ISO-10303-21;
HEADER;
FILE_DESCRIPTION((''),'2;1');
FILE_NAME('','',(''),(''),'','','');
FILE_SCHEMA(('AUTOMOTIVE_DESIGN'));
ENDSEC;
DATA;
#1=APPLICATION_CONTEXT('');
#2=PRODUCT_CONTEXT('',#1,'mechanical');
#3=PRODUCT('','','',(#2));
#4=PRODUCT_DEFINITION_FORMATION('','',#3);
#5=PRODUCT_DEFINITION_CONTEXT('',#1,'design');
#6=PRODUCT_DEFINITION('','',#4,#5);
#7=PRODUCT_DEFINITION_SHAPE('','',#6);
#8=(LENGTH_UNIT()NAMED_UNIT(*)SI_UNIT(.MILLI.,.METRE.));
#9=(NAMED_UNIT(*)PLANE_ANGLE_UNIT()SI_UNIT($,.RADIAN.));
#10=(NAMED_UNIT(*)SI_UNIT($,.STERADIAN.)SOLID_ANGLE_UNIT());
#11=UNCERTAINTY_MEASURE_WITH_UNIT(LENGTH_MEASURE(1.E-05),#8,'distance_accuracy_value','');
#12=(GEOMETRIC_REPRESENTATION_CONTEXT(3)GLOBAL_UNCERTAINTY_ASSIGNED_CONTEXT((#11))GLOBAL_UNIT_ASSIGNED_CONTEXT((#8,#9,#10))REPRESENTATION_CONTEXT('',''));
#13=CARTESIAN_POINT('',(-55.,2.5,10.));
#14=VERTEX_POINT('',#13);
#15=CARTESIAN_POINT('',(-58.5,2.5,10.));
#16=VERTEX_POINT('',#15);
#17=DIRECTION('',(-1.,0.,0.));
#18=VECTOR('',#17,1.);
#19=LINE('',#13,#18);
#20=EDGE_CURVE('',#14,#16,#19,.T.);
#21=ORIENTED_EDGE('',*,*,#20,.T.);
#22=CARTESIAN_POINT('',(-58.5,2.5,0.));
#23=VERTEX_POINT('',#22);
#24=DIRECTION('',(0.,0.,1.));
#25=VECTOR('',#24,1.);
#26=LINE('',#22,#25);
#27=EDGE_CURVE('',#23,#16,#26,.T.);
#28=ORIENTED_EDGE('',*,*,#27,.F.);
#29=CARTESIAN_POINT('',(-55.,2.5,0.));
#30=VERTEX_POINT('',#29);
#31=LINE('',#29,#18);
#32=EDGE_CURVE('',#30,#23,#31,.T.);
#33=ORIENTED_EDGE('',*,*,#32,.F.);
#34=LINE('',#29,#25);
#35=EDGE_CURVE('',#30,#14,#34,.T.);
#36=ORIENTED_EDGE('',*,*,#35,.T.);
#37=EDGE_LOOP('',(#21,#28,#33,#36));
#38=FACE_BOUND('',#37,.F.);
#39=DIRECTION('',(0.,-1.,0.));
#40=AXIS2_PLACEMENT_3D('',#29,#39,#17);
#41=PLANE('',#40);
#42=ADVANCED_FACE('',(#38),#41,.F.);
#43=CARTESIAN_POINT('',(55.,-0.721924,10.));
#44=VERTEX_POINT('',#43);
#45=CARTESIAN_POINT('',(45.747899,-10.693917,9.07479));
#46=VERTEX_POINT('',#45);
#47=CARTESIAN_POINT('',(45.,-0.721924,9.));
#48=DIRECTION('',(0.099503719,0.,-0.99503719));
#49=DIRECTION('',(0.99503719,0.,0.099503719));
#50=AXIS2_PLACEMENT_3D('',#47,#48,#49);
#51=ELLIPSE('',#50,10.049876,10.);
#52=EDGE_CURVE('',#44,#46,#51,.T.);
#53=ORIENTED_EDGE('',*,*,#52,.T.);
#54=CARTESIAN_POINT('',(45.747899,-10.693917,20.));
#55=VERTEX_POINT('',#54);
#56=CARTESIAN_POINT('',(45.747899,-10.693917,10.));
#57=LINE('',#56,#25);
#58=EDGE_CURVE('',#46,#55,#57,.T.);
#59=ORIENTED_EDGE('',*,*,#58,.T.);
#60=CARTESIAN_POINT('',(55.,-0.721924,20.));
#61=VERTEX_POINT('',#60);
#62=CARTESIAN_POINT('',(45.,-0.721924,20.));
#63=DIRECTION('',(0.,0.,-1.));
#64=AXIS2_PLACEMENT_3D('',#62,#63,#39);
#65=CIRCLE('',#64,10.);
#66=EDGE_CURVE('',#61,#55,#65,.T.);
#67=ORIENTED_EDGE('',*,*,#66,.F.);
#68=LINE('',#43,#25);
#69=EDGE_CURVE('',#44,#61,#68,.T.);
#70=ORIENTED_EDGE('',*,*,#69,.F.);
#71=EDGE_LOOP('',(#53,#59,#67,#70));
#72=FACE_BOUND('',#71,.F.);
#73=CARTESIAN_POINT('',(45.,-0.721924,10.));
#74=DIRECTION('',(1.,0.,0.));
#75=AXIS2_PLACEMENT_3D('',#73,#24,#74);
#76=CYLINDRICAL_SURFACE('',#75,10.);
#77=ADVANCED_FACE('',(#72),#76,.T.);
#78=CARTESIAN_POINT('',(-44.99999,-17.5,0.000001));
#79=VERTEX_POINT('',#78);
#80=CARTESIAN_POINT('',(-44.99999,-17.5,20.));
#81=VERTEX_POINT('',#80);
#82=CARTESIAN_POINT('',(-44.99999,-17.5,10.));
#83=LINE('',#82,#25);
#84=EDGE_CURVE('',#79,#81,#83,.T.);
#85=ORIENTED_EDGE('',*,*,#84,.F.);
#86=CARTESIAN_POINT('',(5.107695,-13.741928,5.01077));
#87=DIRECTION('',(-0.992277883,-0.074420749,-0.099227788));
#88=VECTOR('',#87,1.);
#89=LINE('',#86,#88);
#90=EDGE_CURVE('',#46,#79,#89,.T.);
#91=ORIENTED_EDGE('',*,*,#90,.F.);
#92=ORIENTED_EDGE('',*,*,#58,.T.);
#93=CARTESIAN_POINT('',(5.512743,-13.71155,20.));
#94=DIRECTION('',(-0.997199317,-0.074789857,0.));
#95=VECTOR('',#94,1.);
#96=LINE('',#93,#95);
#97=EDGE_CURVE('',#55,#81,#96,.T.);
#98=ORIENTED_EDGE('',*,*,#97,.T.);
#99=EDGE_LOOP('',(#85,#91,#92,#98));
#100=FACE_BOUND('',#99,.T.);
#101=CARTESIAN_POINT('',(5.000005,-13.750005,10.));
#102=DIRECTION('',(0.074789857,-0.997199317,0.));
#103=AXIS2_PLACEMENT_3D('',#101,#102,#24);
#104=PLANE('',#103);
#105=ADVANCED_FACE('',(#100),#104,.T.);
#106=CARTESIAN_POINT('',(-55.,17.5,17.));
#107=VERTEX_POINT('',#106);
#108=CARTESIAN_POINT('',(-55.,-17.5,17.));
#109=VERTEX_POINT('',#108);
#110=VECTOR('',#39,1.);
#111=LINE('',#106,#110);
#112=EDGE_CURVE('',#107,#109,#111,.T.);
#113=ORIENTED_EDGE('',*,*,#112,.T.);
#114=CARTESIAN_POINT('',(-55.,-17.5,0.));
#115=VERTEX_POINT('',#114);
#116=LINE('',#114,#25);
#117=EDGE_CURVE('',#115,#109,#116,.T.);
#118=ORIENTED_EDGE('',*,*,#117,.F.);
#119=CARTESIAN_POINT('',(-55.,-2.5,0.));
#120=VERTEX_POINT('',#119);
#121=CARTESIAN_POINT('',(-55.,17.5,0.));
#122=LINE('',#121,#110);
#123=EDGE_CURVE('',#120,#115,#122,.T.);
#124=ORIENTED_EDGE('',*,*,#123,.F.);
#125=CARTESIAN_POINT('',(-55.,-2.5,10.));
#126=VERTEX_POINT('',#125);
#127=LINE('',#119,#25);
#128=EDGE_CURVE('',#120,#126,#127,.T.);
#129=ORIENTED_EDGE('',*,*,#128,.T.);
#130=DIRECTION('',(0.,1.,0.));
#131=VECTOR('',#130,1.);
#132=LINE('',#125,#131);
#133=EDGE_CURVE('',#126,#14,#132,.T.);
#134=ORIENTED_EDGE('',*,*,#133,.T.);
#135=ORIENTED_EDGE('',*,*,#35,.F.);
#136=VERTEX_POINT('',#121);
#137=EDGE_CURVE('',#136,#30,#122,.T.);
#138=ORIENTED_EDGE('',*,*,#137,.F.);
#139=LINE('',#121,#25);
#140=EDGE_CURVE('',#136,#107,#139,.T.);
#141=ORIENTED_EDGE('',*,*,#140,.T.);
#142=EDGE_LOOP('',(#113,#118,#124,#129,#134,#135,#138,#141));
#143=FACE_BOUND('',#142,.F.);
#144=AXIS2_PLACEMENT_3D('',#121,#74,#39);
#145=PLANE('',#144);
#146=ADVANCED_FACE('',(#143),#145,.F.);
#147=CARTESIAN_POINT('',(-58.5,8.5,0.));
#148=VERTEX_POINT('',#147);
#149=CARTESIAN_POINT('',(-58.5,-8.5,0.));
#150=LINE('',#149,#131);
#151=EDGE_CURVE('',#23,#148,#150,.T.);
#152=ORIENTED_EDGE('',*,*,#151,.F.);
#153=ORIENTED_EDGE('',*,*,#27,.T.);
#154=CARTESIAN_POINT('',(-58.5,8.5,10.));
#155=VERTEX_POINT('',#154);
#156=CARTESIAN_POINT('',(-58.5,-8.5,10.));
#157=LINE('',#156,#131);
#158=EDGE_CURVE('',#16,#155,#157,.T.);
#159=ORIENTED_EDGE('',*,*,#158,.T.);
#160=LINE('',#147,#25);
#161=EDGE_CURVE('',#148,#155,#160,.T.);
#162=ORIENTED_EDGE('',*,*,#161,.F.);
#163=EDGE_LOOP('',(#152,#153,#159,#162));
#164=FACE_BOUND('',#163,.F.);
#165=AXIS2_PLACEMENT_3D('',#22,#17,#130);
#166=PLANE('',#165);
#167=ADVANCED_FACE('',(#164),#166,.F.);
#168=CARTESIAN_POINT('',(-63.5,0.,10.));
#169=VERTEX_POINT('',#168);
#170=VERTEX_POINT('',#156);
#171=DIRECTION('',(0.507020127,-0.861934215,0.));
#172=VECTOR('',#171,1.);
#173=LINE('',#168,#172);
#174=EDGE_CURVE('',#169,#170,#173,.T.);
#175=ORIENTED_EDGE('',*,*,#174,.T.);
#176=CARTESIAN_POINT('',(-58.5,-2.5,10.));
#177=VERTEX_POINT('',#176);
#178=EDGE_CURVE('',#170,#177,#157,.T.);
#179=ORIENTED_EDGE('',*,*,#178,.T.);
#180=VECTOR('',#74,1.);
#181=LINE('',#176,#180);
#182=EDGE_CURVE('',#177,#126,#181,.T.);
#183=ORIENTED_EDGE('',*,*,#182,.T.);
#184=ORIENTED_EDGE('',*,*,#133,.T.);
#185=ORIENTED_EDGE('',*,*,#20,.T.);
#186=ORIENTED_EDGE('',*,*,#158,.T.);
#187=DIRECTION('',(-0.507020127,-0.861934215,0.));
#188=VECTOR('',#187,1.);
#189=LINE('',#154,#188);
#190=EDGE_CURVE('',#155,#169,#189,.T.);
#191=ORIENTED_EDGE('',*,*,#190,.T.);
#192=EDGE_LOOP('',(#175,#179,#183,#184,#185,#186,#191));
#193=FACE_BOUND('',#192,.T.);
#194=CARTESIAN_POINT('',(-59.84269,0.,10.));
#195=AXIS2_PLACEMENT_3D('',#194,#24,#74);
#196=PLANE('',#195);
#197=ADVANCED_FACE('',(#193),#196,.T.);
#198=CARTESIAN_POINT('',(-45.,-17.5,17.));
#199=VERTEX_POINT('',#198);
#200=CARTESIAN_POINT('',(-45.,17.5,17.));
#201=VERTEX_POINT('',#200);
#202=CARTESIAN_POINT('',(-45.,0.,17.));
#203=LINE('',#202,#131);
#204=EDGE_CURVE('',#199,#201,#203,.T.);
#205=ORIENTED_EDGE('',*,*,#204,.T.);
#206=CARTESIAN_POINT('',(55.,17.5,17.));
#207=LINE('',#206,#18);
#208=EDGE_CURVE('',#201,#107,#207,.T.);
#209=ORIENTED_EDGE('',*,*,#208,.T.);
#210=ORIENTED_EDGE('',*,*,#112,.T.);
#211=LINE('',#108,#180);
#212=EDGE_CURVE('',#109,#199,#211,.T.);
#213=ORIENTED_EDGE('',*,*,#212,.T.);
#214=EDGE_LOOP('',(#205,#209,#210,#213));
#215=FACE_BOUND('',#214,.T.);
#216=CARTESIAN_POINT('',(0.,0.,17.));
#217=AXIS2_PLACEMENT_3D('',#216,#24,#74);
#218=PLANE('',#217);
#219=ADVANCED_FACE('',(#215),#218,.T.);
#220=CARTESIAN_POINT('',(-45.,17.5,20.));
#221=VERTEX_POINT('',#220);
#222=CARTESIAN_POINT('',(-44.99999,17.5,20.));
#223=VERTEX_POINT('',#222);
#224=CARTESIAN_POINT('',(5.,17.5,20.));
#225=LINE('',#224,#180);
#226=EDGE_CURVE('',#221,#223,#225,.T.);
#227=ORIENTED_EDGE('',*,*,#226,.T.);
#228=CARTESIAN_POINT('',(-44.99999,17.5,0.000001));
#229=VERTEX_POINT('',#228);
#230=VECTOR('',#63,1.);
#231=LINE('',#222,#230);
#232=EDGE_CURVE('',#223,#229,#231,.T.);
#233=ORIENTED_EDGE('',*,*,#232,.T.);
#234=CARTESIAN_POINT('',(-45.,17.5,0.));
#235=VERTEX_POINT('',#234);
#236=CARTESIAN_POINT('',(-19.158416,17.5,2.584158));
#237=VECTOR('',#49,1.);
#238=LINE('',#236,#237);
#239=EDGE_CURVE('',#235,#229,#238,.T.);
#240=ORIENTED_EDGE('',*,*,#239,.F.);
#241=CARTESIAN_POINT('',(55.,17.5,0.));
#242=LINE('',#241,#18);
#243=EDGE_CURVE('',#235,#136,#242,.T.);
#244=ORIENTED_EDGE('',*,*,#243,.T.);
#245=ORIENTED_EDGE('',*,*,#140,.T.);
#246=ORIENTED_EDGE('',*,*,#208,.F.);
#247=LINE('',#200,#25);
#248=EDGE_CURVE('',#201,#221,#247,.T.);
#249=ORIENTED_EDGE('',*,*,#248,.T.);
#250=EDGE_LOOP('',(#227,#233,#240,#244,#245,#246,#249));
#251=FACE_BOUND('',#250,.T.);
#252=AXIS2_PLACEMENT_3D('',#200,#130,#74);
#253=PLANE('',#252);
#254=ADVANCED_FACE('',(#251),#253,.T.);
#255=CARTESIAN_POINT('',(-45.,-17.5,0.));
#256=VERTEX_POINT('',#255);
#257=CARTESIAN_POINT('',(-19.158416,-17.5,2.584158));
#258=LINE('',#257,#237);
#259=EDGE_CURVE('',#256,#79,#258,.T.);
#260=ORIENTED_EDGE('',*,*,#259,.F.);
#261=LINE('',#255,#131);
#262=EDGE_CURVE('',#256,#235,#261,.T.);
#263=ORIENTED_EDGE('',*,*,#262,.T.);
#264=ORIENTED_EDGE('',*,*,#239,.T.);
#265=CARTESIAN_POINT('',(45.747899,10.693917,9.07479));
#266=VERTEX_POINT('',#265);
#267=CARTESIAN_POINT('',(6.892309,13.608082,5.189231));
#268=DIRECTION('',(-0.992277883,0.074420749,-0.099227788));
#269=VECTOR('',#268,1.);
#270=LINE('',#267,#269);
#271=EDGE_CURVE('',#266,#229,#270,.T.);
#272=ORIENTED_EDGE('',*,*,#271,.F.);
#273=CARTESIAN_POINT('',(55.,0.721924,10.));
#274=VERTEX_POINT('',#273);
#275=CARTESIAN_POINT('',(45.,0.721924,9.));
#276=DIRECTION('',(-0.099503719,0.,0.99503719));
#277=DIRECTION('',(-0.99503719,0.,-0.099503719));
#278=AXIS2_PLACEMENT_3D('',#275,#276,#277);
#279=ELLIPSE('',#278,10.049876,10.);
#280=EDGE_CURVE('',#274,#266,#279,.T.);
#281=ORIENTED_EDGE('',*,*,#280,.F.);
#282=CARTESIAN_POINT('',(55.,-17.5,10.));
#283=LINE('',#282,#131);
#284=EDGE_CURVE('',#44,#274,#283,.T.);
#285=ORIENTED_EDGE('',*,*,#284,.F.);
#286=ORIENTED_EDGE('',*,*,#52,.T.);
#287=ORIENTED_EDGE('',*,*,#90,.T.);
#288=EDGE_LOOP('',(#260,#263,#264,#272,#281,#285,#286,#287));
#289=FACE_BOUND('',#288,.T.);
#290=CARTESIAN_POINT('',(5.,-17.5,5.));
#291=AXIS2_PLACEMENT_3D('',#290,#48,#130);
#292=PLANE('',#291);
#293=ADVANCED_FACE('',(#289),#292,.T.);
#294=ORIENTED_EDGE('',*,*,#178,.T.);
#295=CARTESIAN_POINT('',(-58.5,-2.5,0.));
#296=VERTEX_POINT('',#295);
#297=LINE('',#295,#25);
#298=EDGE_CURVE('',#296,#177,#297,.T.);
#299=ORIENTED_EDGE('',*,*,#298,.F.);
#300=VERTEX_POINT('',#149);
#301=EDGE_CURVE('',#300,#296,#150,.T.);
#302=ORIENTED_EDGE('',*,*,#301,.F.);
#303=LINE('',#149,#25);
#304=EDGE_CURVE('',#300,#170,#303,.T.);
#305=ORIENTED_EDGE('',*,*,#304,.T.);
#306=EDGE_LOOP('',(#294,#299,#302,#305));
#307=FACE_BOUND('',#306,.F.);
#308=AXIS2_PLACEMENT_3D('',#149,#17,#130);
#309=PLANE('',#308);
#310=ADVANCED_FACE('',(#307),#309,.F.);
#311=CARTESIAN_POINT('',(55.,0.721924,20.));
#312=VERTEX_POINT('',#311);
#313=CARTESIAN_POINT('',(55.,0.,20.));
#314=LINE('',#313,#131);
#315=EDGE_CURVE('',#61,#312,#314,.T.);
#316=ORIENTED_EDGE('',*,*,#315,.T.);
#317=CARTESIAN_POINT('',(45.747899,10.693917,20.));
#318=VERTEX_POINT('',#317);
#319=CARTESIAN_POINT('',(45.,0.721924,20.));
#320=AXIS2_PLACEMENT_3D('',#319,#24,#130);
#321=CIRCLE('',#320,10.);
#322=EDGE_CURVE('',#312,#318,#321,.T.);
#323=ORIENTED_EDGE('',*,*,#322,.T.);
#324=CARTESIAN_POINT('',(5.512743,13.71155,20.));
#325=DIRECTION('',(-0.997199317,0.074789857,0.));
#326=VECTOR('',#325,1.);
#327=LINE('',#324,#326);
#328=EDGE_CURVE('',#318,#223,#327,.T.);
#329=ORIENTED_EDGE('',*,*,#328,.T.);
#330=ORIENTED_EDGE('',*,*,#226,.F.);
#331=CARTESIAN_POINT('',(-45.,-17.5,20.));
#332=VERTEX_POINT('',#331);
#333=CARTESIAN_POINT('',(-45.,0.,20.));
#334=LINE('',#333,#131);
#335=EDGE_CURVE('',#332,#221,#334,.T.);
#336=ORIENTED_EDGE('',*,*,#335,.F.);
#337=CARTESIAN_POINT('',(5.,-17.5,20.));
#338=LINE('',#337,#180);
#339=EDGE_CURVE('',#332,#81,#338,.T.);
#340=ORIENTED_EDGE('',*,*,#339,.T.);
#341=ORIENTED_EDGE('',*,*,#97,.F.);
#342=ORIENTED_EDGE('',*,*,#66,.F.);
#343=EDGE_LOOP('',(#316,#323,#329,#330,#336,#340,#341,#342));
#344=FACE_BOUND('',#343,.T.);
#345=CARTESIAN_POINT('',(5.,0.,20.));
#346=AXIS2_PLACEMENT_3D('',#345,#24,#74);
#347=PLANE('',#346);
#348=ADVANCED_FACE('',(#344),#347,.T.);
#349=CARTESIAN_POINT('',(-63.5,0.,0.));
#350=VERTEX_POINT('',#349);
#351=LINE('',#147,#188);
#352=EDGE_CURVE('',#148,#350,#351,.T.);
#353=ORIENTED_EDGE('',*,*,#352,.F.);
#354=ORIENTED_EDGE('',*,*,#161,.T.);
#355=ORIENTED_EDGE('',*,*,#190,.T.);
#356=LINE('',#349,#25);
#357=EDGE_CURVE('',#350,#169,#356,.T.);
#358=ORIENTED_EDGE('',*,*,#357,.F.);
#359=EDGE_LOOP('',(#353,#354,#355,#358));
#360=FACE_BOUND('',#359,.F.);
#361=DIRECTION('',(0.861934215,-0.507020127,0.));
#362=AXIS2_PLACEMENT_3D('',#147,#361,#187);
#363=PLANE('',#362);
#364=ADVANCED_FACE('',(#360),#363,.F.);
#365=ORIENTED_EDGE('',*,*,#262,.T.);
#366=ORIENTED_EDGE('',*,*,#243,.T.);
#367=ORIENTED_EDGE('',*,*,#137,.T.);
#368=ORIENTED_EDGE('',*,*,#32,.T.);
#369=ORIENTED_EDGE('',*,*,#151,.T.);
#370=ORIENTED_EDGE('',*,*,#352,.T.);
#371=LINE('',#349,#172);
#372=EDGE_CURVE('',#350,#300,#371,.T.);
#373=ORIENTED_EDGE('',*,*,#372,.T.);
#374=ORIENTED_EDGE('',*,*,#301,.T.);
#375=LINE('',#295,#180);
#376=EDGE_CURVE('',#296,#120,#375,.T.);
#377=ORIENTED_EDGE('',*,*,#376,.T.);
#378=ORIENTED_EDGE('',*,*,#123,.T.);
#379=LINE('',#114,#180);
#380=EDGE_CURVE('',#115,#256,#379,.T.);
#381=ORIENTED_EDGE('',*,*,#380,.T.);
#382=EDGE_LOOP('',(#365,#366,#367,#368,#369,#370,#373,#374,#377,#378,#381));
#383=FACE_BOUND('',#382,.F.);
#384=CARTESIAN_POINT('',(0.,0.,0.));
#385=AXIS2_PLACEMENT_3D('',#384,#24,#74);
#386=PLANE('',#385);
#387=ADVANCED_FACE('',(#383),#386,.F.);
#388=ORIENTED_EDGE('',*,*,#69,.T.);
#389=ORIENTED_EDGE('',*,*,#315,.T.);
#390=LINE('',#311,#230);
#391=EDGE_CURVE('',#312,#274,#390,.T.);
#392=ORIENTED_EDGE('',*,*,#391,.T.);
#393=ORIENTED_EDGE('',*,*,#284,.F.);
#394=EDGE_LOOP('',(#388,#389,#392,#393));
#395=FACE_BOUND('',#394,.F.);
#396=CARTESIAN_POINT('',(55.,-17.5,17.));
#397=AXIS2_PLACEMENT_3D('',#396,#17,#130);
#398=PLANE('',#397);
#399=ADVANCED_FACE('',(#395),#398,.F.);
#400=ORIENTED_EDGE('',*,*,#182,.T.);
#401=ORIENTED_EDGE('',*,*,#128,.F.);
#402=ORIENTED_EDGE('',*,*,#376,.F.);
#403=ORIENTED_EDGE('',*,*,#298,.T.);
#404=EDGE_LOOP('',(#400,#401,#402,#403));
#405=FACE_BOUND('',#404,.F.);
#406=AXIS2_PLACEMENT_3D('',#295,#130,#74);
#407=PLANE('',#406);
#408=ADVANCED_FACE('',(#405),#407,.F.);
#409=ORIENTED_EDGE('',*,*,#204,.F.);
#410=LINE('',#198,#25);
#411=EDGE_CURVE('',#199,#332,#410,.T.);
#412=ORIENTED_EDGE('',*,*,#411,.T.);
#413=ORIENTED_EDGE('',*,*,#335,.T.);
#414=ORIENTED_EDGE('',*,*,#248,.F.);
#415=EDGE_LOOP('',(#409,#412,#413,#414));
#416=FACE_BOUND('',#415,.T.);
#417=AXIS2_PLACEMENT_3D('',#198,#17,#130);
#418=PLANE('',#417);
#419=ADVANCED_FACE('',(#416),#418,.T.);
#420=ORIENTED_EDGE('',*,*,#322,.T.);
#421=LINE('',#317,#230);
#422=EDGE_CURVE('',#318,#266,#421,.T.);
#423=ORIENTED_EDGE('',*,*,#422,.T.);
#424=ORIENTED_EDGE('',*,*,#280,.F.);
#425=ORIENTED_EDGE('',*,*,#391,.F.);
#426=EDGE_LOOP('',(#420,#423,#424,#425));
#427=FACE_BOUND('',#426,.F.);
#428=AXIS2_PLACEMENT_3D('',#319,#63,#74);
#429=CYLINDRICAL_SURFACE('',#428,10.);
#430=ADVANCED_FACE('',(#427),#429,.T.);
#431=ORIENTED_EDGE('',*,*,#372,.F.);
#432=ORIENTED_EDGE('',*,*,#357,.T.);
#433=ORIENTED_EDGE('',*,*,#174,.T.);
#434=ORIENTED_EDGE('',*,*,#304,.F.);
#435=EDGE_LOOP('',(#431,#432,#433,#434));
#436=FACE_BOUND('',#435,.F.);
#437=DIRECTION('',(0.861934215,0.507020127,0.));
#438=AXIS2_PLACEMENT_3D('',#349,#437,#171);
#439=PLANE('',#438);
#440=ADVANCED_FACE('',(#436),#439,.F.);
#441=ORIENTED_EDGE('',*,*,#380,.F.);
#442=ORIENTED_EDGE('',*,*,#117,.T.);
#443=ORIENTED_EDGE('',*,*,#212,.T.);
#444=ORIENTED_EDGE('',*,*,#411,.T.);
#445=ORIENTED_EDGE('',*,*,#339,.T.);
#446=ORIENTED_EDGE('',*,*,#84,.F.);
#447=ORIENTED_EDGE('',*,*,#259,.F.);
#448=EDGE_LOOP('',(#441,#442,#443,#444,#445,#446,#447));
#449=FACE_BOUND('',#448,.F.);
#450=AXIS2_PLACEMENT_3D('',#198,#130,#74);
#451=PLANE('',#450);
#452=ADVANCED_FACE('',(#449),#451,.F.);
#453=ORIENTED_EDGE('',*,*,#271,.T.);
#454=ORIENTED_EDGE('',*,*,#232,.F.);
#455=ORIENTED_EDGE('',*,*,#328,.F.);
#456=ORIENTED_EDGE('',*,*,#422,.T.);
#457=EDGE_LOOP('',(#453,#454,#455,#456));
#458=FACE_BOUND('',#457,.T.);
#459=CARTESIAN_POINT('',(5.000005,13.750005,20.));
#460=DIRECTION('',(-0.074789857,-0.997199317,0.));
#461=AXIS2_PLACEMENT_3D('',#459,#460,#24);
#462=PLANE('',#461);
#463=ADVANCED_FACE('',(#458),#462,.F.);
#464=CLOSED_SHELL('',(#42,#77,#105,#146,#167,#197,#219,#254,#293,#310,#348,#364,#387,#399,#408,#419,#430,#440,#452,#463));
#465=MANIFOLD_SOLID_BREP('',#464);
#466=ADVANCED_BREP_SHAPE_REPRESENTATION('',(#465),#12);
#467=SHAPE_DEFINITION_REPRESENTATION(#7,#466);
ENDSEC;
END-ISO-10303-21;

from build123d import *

# Parameters (mm, degrees)
F1_DEPTH = 10
F2_DEPTH = 17
F3_W     = 100
F3_H     = 35
F4_DEPTH = 3
F5_SIZE2 = 10
F5_SIZE  = 100
F6_SIZE2 = 99.99999
F6_SIZE  = 7.49999
F7_R     = 10


# Not quite as in the source:
# - a fillet or chamfer is up to 0.001 mm smaller than in the source, because OpenCascade refuses the exact size


with BuildPart() as f1:
    # F0 (on Top) → F1 (new body)
    with BuildSketch(Plane.XY):
        Polygon((-58.5, -8.5), (-58.5, -2.5), (-58.5, 0), (-58.5, 2.5), (-58.5, 8.5), (-63.5, 0), align=None)
        Polygon((-58.5, -2.5), (-55, -2.5), (-55, 2.5), (-58.5, 2.5), (-58.5, 0), align=None)
    extrude(amount=F1_DEPTH)

    # F0 (on Top) → F2 (join)
    with BuildSketch(Plane.XY):
        Polygon((-55, -17.5), (55, -17.5), (55, 17.5), (-55, 17.5), (-55, 2.5), (-55, -2.5), align=None)
    extrude(amount=F2_DEPTH)

    # F3 (on face) → F4 (join)
    with BuildSketch(Plane.XY.offset(17)):
        with Locations((5, 0)):
            Rectangle(F3_W, F3_H)
    extrude(amount=F4_DEPTH)

    # F5
    f5_edges = [f1.edges().sort_by_distance(p)[0] for p in [
        (55, 0, 0),
    ]]
    f5_side = f1.faces().sort_by_distance((-0.907982, 0, 0))[0]
    chamfer(f5_edges, length=F5_SIZE, length2=F5_SIZE2, reference=f5_side)

    # F6 (size 7.5 and 100 in the source; OpenCascade refuses exactly that, so slightly less here)
    f6_edges = [f1.edges().sort_by_distance(p)[0] for p in [
        (55, -17.5, 15),
        (55, 17.5, 15),
    ]]
    f6_side = f1.faces().sort_by_distance((55, 0, 15))[0]
    chamfer(f6_edges, length=F6_SIZE, length2=F6_SIZE2, reference=f6_side)

    # F7
    f7_edges = [f1.edges().sort_by_distance(p)[0] for p in [
        (55, -10.00001, 15),
        (55, 10.00001, 15),
    ]]
    fillet(f7_edges, radius=F7_R)


solid = f1.part
